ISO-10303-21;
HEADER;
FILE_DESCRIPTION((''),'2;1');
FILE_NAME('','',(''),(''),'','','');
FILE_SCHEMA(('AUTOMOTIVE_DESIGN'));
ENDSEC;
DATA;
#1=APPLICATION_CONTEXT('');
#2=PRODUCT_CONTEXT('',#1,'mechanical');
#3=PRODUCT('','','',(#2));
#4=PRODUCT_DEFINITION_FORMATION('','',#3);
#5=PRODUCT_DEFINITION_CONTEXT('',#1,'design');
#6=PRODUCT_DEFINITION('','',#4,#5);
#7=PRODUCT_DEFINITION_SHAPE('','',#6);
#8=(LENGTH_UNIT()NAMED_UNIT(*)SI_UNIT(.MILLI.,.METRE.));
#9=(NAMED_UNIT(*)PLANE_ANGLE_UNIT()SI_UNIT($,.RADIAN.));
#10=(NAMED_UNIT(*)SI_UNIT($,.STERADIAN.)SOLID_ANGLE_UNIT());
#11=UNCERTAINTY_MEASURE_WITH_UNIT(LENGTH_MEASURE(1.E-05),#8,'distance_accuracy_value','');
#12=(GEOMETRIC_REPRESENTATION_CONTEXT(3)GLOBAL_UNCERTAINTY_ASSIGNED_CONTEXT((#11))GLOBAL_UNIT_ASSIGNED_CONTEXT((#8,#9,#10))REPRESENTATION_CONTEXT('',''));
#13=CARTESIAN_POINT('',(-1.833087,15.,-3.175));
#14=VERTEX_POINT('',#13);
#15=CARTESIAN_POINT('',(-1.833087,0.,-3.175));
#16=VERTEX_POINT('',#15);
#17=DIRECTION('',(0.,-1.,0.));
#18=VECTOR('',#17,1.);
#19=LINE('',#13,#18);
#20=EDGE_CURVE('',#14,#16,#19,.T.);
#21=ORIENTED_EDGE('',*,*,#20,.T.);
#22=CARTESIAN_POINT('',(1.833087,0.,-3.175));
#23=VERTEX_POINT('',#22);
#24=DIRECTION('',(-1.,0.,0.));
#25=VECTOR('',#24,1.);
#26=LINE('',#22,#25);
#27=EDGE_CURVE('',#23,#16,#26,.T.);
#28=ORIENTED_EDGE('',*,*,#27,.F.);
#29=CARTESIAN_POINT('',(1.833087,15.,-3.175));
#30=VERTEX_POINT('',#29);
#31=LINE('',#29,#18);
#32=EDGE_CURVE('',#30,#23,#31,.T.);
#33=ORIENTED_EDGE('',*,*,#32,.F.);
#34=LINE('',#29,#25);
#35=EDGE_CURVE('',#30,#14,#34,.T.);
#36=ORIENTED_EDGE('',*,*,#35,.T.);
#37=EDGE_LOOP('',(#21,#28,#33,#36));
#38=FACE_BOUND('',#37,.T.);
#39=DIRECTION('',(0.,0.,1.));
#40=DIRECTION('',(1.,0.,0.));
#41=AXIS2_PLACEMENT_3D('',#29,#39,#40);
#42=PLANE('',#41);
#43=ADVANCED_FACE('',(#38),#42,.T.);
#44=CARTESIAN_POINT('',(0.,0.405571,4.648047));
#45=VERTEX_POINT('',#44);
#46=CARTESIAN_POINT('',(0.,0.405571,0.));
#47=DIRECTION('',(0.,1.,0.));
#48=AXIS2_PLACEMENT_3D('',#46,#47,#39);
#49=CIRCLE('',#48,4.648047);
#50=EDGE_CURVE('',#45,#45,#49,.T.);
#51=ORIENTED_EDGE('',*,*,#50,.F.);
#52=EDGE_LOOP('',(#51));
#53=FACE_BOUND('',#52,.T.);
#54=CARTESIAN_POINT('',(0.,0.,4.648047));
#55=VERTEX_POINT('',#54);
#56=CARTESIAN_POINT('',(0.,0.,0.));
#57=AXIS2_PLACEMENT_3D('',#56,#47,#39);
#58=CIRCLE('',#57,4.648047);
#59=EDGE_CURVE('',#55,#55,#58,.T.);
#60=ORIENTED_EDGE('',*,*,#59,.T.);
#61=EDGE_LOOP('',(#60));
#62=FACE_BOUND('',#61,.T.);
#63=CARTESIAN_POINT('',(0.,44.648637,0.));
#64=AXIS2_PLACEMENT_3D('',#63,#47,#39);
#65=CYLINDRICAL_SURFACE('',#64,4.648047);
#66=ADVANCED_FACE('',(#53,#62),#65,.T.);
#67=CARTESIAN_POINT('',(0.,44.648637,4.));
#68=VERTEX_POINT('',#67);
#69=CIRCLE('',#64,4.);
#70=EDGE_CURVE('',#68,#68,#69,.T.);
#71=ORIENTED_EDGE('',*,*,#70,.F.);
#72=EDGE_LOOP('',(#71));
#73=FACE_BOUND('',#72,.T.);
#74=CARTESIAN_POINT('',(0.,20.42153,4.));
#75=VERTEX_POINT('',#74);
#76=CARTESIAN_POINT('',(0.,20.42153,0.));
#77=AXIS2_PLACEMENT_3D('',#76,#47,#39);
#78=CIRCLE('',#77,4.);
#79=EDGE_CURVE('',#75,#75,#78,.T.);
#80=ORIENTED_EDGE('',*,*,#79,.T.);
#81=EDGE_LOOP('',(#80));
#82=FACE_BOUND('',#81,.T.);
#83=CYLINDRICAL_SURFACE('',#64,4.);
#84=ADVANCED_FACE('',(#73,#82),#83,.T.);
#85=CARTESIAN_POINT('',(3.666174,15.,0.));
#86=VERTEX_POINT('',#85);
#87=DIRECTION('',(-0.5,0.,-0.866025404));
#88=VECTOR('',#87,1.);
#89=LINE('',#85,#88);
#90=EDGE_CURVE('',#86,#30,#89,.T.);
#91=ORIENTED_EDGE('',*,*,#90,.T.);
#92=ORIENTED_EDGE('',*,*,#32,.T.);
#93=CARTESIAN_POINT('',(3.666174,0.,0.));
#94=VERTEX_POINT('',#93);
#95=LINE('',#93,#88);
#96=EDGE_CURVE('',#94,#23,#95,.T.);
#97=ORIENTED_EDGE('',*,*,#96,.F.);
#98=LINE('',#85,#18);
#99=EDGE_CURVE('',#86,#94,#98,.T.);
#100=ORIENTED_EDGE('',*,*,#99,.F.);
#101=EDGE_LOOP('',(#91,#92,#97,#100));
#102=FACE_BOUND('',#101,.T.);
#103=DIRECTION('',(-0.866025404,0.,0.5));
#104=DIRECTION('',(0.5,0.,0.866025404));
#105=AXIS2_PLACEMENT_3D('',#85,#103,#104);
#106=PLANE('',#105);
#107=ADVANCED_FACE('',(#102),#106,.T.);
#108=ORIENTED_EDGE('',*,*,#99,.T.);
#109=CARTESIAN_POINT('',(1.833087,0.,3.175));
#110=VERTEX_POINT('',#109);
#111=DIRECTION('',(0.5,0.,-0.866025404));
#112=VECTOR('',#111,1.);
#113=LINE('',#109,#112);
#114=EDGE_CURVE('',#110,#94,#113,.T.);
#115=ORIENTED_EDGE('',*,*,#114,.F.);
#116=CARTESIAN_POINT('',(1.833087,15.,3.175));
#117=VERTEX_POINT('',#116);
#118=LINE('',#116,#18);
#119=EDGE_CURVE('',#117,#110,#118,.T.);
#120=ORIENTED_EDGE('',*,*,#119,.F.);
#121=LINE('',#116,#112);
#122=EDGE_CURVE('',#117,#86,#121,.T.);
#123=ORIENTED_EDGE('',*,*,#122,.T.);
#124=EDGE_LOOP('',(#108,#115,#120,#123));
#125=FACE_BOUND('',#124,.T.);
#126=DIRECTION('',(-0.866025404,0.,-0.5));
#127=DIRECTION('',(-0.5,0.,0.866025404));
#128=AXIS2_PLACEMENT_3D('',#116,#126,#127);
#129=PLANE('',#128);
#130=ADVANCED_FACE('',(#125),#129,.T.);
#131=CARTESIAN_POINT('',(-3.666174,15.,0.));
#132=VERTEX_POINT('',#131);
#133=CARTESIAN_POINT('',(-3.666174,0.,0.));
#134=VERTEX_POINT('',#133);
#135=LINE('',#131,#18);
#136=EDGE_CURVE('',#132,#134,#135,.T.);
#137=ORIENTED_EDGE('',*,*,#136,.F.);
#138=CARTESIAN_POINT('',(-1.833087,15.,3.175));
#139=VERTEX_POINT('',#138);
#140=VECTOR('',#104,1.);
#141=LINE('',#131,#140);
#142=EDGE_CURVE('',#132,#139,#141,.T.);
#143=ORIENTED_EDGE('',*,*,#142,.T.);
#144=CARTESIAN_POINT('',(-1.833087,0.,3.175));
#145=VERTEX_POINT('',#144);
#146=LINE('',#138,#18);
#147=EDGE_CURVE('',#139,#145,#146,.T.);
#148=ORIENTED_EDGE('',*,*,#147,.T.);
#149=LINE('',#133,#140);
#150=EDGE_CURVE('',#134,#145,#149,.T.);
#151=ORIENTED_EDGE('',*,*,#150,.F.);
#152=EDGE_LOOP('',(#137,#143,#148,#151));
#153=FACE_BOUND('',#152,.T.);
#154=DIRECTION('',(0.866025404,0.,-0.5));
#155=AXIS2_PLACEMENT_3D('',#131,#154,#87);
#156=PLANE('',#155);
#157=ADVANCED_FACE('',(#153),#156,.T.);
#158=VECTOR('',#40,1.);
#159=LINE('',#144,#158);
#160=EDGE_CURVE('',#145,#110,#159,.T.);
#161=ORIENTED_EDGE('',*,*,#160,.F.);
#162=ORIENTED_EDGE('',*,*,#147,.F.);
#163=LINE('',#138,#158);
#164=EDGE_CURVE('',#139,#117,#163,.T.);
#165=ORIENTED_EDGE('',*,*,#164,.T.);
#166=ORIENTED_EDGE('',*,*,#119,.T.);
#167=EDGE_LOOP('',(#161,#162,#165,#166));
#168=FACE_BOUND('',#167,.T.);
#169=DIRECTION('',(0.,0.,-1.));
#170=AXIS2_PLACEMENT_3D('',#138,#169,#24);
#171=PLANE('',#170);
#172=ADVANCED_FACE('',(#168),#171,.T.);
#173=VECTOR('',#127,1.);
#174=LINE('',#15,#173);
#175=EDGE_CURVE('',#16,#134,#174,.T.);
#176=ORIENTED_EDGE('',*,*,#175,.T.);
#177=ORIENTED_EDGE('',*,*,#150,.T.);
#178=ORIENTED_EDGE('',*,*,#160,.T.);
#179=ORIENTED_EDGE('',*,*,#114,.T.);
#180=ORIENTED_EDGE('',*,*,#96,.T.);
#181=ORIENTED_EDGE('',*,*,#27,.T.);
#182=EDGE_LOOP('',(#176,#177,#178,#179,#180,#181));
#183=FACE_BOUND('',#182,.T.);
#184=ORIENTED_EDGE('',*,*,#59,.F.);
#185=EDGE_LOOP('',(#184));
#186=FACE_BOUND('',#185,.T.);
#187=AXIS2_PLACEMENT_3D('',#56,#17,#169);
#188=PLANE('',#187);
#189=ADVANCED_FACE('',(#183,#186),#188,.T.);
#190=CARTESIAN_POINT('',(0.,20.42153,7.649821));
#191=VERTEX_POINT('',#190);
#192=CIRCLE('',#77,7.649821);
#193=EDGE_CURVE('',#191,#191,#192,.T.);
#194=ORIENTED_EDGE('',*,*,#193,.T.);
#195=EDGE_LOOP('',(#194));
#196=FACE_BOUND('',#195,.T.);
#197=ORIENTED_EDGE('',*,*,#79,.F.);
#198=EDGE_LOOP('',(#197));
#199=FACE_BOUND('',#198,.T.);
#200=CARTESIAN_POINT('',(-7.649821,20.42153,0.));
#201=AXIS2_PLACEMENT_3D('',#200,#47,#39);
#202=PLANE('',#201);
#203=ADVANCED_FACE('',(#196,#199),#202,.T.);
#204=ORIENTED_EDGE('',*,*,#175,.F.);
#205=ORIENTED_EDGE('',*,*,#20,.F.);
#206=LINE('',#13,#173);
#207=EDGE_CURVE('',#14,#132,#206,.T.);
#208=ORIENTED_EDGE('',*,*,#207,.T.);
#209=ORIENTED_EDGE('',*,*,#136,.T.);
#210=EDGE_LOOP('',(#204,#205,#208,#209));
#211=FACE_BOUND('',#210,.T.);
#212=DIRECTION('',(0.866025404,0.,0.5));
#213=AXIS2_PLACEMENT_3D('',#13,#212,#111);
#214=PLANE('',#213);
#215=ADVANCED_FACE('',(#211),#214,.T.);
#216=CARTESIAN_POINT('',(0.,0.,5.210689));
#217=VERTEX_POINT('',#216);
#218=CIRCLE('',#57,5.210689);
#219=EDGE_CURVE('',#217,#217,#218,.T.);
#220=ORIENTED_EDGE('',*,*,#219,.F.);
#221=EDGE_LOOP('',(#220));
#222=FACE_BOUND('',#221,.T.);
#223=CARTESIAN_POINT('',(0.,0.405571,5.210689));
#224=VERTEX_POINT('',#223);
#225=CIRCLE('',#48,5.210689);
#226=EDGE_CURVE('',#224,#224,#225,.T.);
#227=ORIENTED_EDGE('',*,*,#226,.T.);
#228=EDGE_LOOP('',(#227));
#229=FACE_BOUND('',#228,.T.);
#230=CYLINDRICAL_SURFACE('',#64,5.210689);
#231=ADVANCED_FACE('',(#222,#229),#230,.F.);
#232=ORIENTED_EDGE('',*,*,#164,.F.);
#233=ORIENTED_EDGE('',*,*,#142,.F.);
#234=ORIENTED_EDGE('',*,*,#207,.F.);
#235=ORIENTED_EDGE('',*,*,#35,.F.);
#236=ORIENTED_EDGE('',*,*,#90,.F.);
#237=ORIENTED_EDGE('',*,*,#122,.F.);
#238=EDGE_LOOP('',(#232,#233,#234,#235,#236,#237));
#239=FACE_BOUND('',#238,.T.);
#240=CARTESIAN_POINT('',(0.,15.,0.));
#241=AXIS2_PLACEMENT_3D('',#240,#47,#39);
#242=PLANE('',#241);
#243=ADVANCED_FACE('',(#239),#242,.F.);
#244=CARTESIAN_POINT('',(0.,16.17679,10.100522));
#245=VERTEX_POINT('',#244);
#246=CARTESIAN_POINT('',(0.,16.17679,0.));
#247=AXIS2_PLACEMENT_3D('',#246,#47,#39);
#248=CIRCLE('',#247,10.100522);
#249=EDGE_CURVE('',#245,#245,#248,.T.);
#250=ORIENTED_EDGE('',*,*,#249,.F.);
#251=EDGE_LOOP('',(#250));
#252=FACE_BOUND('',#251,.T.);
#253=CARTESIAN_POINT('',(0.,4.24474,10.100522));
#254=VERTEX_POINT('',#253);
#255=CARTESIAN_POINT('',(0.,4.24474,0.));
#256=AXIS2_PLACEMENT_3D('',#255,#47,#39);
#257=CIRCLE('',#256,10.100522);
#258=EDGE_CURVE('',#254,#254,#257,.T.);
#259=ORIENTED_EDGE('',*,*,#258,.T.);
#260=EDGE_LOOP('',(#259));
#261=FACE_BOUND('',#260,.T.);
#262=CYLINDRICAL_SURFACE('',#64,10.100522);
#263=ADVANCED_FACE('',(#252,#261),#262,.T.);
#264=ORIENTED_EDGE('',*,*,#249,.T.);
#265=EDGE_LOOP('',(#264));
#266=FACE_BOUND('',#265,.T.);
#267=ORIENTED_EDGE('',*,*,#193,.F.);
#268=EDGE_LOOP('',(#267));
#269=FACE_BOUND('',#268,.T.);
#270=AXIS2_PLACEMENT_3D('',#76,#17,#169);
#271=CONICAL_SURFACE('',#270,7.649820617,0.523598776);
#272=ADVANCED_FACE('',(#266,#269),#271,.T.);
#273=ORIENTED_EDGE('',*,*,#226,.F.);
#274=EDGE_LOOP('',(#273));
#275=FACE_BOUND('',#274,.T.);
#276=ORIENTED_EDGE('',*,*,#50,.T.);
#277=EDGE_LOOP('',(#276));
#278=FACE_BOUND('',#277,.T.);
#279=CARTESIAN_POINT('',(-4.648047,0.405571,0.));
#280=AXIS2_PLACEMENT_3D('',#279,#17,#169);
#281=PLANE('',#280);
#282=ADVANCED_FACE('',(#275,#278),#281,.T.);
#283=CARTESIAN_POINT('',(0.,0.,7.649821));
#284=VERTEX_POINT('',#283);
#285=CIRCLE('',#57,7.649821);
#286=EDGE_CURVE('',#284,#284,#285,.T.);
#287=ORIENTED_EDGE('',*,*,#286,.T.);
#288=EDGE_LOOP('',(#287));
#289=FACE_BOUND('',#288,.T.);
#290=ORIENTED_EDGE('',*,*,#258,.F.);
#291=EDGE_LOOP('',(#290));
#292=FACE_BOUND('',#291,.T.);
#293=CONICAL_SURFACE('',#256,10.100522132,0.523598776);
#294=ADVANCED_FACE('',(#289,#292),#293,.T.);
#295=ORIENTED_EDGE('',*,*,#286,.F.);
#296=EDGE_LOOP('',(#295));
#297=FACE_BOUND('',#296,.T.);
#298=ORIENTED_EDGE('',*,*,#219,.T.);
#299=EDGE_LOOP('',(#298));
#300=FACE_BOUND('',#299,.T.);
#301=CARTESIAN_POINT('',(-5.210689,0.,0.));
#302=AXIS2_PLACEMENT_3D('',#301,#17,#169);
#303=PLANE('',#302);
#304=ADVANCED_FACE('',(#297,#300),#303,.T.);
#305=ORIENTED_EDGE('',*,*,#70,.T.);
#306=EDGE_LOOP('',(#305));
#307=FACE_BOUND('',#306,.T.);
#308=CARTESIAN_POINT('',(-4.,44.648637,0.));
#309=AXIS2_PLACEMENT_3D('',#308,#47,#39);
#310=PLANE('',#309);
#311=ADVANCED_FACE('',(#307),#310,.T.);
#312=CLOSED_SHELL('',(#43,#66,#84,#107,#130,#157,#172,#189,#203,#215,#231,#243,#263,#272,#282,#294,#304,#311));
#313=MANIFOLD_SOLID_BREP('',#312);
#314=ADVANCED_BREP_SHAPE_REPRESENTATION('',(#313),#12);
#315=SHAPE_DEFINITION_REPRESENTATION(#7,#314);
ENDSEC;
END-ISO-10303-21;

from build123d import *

# Parameters (mm, degrees)
CUT_EXTRUDE1_DEPTH = 15
SKETCH5_OUTSIDE_W  = 38.178
SKETCH5_OUTSIDE_H  = 38.178
CUT_EXTRUDE4_DEPTH = 48.97402978


# Read off the part's stored shape, not the designer's step: Save Bodies1
with BuildPart() as part:
    # Sketch3 → Revolve1 (revolve)
    with BuildSketch(Plane.XY, mode=Mode.PRIVATE) as revolve1_sk:
        Polygon((0, 0), (-4.648047108, 0), (-4.648047108, 0.405570897), (-5.210688758, 0.405570897), (-5.210688758, 0), (-7.649820617, 0), (-10.100522132, 4.244739538), (-10.100522132, 16.176790493), (-7.649820617, 20.42153003), (-4, 20.42153003), (-4, 44.648637254), (0, 44.648637254), align=None)
    revolve(revolve1_sk.sketch.rotate(Axis((0, 44.648637254, 0), (0, -1, 0)), 270), axis=Axis((0, 44.648637254, 0), (0, -1, 0)))

    # Sketch2 → Cut-Extrude1 (cut)
    with BuildSketch(Plane(origin=(0, 0, 0), x_dir=(1, 0, 0), z_dir=(0, 1, 0))):
        Polygon((3.666174209, 0), (1.833087105, 3.175), (-1.833087105, 3.175), (-3.666174209, 0), (-1.833087105, -3.175), (1.833087105, -3.175), align=None)
    extrude(amount=CUT_EXTRUDE1_DEPTH, mode=Mode.SUBTRACT)


with BuildPart() as body_2:
    # Sketch4 → Revolve2 (revolve)
    with BuildSketch(Plane.XY, mode=Mode.PRIVATE) as revolve2_sk:
        with BuildLine():
            Line((10.100522132, 16.176790493), (10.100522132, 4.244739538))
            Line((10.100522132, 4.244739538), (10.600522132, 4.244739538))
            ThreePointArc((10.600522132, 4.244739538), (12.409809018, 10.210765015), (10.600522132, 16.176790493))
            Line((10.600522132, 16.176790493), (10.100522132, 16.176790493))
        make_face()
    revolve(revolve2_sk.sketch.rotate(Axis((0, 44.648637254, 0), (0, -1, 0)), 90), axis=Axis((0, 44.648637254, 0), (0, -1, 0)))

    # Sketch5 outside → Cut-Extrude4 (cut, through all)
    with BuildSketch(Plane(origin=(0, 0, 0), x_dir=(1, 0, 0), z_dir=(0, 1, 0))):
        Rectangle(SKETCH5_OUTSIDE_W, SKETCH5_OUTSIDE_H)
        Polygon((-0.056367181, 11.203062871), (-5.650346846, 9.673953456), (-9.730320636, 5.552716025), (-11.203062871, -0.056367181), (-9.673953456, -5.650346846), (-5.552716025, -9.730320636), (0.056367181, -11.203062871), (5.650346846, -9.673953456), (9.730320636, -5.552716025), (11.203062871, 0.056367181), (9.673953456, 5.650346846), (5.552716025, 9.730320636), align=None, mode=Mode.SUBTRACT)
    extrude(amount=CUT_EXTRUDE4_DEPTH, mode=Mode.SUBTRACT)


solid = part.part
